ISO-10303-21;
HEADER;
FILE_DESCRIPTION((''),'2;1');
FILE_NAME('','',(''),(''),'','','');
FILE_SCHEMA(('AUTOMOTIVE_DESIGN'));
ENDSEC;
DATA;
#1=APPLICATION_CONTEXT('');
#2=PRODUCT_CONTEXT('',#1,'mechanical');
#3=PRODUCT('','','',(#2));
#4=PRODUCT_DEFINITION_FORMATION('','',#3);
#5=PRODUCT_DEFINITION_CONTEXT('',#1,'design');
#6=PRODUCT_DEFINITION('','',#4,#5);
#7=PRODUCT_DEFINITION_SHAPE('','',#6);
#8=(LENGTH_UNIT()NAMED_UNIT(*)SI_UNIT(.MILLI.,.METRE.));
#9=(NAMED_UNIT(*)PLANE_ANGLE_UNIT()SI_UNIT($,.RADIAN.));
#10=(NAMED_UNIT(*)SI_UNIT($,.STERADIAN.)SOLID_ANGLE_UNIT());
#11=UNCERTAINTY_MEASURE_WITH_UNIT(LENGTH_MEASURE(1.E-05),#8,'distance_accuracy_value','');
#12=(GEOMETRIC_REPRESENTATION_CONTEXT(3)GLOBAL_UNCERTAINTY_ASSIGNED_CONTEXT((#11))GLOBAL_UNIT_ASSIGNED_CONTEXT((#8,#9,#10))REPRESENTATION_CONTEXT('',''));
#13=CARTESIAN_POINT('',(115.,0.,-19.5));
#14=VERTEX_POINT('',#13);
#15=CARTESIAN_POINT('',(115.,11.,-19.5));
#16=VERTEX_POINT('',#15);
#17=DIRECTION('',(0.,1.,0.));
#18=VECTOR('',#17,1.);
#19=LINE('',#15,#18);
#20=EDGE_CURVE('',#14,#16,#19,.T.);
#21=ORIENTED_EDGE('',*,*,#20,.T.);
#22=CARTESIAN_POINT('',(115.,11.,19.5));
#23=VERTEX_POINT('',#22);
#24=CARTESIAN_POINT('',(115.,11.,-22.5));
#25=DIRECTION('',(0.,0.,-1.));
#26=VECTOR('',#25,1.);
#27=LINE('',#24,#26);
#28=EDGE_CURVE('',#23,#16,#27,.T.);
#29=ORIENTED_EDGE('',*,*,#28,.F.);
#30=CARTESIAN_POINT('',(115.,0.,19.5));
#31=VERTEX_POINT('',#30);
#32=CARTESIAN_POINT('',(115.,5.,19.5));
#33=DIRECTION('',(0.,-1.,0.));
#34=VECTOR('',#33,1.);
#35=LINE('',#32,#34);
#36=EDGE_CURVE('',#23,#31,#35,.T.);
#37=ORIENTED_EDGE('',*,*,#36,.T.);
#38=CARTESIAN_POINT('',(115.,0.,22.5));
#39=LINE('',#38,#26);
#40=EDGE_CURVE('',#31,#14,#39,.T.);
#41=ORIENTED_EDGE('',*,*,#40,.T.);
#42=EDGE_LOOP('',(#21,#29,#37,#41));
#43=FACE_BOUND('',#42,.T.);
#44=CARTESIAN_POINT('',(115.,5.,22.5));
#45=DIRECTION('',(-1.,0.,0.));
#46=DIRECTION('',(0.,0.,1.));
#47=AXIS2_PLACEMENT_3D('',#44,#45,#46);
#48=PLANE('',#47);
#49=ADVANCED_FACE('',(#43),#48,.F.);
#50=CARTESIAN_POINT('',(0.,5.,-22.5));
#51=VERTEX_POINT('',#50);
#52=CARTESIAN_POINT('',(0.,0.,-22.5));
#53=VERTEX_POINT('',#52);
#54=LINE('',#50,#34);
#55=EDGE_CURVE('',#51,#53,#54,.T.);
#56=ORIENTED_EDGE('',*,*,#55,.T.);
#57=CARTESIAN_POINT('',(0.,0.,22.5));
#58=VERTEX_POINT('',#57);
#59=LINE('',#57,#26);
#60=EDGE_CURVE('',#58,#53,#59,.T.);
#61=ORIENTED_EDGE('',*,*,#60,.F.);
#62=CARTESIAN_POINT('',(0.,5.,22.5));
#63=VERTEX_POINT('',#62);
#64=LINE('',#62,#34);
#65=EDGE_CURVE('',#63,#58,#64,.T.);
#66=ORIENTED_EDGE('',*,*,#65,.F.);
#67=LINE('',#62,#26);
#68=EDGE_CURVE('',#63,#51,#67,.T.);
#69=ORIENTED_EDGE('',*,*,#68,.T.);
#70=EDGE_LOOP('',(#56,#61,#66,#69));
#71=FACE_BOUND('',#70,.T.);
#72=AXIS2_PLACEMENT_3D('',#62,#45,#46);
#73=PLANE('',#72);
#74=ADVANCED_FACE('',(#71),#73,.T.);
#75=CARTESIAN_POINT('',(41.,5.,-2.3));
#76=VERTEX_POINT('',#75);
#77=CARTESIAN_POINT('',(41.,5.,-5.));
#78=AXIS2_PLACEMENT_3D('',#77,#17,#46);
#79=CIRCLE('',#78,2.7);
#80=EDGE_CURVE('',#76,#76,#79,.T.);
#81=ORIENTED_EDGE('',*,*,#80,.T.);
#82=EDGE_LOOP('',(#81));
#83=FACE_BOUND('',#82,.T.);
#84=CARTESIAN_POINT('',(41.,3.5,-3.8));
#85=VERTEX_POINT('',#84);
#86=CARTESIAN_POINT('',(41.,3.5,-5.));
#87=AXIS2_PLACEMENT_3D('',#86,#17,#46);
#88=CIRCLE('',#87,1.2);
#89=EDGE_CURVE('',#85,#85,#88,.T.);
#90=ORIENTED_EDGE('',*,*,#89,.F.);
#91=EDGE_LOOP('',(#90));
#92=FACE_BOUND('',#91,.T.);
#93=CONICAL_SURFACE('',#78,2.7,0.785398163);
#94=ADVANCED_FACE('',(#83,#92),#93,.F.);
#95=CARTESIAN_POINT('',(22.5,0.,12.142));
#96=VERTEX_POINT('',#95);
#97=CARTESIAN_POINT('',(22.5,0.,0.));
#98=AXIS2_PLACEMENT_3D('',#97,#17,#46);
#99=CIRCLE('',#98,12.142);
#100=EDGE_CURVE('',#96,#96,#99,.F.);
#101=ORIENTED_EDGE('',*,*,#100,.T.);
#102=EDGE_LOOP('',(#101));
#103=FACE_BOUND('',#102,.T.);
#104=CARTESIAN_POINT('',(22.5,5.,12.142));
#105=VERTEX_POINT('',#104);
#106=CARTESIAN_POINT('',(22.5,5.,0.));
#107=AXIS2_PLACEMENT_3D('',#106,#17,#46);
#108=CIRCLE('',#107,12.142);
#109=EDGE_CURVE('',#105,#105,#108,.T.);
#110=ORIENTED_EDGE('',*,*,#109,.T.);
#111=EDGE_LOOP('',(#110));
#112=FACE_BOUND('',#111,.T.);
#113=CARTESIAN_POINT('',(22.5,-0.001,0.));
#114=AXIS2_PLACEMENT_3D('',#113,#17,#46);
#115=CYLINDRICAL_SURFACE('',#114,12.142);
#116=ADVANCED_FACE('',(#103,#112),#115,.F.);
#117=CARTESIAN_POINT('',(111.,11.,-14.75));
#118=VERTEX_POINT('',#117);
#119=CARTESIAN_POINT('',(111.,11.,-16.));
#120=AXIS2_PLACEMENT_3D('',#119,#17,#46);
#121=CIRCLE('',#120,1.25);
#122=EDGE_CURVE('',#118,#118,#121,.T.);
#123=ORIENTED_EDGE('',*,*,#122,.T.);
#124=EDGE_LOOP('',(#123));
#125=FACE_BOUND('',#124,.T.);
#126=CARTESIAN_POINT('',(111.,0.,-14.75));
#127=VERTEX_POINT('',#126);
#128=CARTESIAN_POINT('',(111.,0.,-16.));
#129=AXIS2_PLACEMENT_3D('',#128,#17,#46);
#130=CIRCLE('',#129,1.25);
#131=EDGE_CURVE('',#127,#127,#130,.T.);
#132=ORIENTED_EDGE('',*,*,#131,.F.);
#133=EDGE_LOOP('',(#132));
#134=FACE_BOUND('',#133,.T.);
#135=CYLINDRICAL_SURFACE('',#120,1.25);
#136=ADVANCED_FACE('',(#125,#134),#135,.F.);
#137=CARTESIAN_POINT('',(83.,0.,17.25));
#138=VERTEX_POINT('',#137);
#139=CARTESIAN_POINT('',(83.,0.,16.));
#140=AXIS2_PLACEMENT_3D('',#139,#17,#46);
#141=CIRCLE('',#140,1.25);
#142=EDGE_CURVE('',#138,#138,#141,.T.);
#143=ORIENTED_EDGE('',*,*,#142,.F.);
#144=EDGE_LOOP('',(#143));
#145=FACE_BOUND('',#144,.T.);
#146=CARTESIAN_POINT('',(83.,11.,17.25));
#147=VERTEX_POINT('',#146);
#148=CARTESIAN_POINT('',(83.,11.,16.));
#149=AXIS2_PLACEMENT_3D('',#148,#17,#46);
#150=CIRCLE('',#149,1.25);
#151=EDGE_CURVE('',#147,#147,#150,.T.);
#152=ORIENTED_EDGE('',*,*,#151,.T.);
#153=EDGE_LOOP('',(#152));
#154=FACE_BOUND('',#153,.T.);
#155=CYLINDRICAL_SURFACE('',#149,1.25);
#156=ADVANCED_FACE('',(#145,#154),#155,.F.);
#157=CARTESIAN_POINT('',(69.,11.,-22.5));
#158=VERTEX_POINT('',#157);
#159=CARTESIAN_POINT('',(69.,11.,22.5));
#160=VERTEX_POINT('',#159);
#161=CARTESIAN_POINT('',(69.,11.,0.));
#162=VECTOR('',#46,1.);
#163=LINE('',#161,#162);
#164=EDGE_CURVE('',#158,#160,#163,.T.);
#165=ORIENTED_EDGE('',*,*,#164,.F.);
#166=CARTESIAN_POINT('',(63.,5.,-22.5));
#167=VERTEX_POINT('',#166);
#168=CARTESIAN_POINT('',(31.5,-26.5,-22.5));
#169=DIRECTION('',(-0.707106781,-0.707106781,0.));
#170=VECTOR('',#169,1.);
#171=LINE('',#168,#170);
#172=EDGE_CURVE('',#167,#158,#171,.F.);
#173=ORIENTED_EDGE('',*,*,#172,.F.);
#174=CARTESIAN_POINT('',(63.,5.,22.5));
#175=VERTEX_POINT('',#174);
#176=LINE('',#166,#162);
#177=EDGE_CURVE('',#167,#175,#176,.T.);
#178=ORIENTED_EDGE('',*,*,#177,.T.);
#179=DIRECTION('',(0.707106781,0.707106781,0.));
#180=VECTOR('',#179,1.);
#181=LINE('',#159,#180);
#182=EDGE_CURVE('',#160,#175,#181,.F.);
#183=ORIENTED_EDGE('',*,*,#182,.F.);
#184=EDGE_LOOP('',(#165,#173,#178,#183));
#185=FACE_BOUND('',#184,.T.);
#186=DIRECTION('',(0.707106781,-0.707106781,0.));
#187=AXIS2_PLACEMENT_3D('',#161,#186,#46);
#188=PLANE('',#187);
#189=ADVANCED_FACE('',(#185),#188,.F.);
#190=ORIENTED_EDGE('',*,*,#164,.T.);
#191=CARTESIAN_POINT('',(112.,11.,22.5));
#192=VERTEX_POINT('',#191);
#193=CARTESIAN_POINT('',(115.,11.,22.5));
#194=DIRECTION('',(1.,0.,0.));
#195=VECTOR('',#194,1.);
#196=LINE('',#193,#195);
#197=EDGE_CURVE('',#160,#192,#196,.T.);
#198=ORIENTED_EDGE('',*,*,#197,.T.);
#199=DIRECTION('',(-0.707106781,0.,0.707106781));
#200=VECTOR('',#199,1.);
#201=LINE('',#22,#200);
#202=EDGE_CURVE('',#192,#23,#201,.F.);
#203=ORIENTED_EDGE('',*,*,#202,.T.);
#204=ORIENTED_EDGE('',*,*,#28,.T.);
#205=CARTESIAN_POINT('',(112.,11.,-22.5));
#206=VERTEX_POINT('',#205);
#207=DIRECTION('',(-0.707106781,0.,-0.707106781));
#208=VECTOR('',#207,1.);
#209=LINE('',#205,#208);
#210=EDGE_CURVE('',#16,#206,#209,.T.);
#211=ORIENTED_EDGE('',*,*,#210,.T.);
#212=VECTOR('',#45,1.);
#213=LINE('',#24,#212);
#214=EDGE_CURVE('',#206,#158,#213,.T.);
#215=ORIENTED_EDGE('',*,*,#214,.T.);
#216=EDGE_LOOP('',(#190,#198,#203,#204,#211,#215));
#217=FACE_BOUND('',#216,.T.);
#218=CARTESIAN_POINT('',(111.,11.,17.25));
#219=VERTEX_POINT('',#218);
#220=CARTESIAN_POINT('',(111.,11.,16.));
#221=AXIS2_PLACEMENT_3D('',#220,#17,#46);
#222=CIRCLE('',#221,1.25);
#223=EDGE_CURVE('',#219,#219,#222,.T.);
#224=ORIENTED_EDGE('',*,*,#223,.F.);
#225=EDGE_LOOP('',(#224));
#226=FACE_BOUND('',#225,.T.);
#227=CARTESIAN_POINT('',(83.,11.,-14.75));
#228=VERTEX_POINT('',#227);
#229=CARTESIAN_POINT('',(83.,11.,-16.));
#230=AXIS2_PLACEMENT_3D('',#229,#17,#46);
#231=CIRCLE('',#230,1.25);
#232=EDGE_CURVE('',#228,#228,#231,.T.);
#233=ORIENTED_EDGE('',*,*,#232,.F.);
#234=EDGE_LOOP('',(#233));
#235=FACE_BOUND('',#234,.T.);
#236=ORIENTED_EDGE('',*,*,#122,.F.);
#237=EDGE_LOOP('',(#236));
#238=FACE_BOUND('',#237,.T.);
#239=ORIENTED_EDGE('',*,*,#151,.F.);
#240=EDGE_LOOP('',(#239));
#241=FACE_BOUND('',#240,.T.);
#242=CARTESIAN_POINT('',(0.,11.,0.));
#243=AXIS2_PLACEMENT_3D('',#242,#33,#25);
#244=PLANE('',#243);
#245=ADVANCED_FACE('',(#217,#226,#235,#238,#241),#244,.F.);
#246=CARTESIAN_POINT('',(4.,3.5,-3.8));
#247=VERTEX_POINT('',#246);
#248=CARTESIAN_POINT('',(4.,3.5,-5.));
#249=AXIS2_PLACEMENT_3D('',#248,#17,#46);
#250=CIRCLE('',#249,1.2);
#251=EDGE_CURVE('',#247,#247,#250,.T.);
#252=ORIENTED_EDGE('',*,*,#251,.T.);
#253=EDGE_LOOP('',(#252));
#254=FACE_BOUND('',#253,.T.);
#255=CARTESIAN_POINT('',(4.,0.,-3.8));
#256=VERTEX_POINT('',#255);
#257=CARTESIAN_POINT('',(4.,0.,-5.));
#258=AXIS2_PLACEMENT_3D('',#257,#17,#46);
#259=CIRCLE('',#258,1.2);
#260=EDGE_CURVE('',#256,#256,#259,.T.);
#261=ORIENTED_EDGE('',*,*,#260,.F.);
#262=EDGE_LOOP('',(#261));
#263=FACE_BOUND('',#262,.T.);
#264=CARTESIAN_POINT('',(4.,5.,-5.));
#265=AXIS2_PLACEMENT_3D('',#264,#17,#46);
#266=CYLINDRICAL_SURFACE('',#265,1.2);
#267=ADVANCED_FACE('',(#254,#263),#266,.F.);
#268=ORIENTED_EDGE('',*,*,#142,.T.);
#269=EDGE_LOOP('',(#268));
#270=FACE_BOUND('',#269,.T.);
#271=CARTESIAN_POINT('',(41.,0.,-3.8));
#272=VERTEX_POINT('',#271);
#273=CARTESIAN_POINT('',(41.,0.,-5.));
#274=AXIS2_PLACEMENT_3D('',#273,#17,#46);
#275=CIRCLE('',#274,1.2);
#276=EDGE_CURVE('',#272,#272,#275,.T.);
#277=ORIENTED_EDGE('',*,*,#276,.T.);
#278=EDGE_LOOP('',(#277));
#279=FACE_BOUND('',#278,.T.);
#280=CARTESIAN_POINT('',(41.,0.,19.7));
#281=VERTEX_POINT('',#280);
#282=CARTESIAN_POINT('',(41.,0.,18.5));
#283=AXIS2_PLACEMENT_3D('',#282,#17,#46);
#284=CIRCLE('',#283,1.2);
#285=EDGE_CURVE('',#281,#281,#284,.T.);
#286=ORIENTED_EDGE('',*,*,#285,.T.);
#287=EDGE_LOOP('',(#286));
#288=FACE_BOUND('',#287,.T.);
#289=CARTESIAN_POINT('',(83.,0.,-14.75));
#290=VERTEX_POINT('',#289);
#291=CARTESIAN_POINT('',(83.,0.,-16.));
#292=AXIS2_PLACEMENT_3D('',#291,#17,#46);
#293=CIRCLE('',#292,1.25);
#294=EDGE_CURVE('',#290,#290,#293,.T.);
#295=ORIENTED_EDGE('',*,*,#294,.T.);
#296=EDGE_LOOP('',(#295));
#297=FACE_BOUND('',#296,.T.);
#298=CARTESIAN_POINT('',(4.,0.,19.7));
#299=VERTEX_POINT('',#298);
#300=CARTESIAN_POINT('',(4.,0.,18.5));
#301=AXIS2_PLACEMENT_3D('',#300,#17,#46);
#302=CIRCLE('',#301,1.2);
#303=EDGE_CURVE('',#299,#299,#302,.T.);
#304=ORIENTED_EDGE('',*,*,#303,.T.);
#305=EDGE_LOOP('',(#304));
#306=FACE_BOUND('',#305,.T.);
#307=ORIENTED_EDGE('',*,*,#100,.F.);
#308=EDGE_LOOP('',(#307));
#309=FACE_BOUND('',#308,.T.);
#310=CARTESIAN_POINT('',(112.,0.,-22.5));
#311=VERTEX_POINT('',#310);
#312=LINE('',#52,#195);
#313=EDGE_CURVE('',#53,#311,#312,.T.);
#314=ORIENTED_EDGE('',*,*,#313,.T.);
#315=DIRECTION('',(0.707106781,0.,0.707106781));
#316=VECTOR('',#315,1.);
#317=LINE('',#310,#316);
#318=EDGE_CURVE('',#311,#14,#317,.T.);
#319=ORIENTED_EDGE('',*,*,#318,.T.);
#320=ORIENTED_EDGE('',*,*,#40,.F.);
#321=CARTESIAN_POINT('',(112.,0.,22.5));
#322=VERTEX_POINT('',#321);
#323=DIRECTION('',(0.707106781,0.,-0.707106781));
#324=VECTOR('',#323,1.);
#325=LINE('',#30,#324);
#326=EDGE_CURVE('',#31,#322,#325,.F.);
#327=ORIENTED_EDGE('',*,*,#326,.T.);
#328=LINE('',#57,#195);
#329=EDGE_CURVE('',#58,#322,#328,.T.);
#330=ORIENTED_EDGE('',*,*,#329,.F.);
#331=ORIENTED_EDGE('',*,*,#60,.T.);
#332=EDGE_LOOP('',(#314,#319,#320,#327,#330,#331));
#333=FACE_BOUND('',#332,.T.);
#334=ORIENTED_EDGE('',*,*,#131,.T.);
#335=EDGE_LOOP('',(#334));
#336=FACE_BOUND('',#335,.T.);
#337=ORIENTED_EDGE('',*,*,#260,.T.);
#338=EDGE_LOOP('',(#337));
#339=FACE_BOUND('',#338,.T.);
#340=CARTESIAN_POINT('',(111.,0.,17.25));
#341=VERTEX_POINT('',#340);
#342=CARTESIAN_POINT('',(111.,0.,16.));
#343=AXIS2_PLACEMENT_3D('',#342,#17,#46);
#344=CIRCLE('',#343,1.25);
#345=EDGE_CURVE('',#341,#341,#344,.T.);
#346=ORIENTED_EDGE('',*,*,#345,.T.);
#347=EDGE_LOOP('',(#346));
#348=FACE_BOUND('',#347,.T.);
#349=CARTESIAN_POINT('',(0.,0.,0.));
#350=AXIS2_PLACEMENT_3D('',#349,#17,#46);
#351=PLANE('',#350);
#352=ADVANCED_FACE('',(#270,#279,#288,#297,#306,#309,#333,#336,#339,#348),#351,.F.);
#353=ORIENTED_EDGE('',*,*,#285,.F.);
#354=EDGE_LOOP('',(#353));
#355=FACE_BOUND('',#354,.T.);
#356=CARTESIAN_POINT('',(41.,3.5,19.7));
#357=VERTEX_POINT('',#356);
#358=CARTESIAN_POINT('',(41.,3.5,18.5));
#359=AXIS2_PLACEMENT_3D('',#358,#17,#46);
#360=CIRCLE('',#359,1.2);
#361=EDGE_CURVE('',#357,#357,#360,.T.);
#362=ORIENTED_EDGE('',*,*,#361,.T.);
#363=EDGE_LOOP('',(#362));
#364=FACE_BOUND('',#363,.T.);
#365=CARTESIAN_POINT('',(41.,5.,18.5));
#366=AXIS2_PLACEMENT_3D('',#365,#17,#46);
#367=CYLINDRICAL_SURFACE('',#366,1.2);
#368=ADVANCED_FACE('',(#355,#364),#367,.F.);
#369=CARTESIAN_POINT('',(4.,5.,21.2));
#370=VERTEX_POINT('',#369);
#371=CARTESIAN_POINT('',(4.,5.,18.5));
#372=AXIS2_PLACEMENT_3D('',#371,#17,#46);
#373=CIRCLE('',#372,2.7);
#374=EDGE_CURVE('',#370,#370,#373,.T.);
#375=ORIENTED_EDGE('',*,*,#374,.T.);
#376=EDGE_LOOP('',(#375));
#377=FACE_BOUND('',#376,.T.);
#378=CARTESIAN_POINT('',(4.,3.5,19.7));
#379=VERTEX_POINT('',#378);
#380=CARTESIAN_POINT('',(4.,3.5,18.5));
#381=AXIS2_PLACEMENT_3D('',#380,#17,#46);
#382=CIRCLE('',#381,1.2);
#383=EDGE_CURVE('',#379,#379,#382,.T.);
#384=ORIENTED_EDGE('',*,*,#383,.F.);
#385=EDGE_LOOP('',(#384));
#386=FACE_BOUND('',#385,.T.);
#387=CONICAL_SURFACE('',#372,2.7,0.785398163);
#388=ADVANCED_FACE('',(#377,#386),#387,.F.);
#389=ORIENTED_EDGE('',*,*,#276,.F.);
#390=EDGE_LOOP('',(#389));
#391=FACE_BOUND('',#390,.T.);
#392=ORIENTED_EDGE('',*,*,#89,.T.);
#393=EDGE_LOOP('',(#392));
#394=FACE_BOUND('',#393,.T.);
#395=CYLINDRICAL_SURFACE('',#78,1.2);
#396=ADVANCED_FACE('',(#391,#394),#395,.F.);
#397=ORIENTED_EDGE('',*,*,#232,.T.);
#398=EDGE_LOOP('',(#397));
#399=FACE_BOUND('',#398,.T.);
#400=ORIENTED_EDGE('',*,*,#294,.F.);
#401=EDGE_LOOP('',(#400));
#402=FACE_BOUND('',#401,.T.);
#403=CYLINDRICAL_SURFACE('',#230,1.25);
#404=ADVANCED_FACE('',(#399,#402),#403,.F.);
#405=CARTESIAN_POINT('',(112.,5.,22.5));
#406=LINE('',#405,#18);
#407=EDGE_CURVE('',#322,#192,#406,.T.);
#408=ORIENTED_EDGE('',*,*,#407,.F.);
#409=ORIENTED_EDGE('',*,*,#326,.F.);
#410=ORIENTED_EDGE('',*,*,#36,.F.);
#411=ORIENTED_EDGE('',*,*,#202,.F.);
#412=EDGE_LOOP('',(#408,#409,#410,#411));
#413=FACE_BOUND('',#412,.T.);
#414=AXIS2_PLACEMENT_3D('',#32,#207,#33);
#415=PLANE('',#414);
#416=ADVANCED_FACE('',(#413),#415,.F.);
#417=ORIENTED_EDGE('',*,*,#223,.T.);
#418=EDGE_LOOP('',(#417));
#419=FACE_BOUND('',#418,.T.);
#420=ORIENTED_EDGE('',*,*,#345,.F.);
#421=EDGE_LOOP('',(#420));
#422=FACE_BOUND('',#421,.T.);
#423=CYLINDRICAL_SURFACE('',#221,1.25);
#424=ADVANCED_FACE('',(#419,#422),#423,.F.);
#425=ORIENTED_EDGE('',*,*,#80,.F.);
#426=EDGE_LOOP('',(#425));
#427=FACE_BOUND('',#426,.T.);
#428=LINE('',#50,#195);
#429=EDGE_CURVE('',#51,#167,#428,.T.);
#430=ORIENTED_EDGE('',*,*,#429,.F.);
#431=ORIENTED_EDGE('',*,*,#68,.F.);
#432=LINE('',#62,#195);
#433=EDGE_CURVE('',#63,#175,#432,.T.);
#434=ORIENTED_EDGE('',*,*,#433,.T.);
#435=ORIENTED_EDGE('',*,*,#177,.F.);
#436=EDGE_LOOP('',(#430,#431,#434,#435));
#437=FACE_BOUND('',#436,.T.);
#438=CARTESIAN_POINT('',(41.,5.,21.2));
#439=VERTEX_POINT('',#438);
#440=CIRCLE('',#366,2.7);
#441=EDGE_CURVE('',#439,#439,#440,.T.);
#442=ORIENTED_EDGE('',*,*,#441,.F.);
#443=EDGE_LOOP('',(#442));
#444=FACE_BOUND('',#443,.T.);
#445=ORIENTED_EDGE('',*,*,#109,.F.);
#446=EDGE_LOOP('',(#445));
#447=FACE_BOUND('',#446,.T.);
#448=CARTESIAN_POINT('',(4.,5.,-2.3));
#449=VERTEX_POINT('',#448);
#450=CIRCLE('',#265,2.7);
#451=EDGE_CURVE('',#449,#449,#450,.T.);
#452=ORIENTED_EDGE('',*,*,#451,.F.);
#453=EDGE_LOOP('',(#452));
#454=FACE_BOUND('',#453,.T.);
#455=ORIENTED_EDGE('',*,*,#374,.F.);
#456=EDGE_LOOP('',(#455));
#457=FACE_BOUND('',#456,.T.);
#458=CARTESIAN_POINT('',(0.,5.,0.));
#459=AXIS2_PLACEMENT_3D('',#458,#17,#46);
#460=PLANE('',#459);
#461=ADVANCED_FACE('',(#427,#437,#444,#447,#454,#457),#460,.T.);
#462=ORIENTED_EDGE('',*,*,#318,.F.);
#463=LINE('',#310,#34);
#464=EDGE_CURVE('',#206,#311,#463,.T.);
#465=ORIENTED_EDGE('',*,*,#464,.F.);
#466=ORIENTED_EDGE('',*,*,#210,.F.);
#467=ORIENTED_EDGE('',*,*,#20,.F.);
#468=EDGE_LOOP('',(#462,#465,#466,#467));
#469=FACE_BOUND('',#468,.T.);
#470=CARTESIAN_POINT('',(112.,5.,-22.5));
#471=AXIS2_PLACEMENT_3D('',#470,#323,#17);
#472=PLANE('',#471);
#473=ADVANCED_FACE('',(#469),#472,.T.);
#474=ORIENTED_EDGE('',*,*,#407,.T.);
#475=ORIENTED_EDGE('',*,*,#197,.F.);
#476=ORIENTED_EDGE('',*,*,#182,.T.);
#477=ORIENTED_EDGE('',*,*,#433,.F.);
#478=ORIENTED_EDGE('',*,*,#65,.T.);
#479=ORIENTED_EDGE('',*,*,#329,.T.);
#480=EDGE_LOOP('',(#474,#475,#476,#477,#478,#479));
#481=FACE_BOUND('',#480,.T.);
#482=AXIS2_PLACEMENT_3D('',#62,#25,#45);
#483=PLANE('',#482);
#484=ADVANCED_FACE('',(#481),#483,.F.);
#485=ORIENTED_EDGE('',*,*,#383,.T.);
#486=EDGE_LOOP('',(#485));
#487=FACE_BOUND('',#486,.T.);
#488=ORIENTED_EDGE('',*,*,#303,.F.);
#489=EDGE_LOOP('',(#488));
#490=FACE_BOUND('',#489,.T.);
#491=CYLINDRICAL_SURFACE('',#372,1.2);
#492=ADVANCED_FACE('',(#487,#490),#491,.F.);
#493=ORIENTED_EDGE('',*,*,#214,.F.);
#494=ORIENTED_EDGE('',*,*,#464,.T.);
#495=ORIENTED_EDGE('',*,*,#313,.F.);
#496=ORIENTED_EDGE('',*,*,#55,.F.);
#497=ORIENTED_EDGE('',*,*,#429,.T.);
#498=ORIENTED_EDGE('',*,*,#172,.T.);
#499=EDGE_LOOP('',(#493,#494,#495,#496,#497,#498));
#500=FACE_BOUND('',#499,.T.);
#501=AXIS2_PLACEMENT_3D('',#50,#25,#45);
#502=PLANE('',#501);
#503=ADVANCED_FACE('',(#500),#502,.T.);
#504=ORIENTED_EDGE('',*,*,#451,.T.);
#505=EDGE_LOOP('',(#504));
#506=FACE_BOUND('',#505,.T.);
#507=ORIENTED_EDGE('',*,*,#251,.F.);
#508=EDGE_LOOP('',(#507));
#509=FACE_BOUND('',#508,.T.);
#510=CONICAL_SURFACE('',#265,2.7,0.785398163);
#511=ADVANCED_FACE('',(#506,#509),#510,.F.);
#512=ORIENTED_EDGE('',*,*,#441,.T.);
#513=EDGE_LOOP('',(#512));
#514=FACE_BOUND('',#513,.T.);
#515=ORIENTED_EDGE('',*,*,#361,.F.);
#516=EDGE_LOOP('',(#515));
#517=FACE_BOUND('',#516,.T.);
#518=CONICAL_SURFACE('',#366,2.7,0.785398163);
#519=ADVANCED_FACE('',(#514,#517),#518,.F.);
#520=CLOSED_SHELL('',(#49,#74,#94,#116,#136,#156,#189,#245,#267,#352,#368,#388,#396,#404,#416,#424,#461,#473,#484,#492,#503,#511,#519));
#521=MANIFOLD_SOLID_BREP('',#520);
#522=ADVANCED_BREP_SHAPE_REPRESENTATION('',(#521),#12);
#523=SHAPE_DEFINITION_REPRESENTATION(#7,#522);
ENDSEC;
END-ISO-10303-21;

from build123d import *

# Parameters (mm, degrees)
SKETCH1_W                                           = 115
SKETCH1_H                                           = 45
BOSS_EXTRUDE1_DEPTH                                 = 5
CUT_EXTRUDE1_REACH                                  = 119.287
SKETCH2_R                                           = 12.142
CSK_FOR_M2_COUNTERSUNK_FLAT_HEAD_SCREW1_D           = 2.4
CSK_FOR_M2_COUNTERSUNK_FLAT_HEAD_SCREW1_CSINK_D     = 5.4
CSK_FOR_M2_COUNTERSUNK_FLAT_HEAD_SCREW1_CSINK_ANGLE = 90
SKETCH13_W                                          = 52
SKETCH13_H                                          = 45
BOSS_EXTRUDE4_DEPTH                                 = 6
CHAMFER2_SIZE                                       = 6
M3_TAPPED_HOLE1_D                                   = 2.5
CHAMFER1_SIZE                                       = 3


with BuildPart() as part:
    # Sketch1 → Boss-Extrude1 (new body)
    with BuildSketch(Plane(origin=(0, 0, 0), x_dir=(1, 0, 0), z_dir=(0, 1, 0))):
        with Locations((57.5, 0)):
            Rectangle(SKETCH1_W, SKETCH1_H)
    extrude(amount=BOSS_EXTRUDE1_DEPTH)

    # Sketch2 → Cut-Extrude1 (cut, up to next)
    with BuildSketch(Plane(origin=(0, 5, 0), x_dir=(1, 0, 0), z_dir=(0, 1, 0)), mode=Mode.PRIVATE) as cut_extrude1_sk1:
        with Locations(Location((22.5, 0, 0), (0, 0, 270))):
            Circle(SKETCH2_R)
    cut_extrude1_tool1 = extrude(cut_extrude1_sk1.sketch, amount=-CUT_EXTRUDE1_REACH, mode=Mode.PRIVATE) & part.part
    add(cut_extrude1_tool1.solids().sort_by_distance((22.5, 5, 0))[0], mode=Mode.SUBTRACT)

    # CSK for M2 Countersunk Flat Head Screw1 (through all)
    with Locations(Plane(origin=(0, 5, 0), x_dir=(1, 0, 0), z_dir=(0, 1, 0))):
        with Locations((4, -18.5), (41, -18.5), (41, 5), (4, 5)):
            CounterSinkHole(CSK_FOR_M2_COUNTERSUNK_FLAT_HEAD_SCREW1_D / 2, CSK_FOR_M2_COUNTERSUNK_FLAT_HEAD_SCREW1_CSINK_D / 2, counter_sink_angle=CSK_FOR_M2_COUNTERSUNK_FLAT_HEAD_SCREW1_CSINK_ANGLE)

    # Sketch13 → Boss-Extrude4 (add)
    with BuildSketch(Plane(origin=(0, 5, 0), x_dir=(1, 0, 0), z_dir=(0, 1, 0))):
        with Locations((89, 0)):
            Rectangle(SKETCH13_W, SKETCH13_H)
    extrude(amount=BOSS_EXTRUDE4_DEPTH)

    # Chamfer2
    chamfer2_edges = [part.edges().sort_by_distance(p)[0] for p in [
        (63, 11, 0),
    ]]
    chamfer(chamfer2_edges, length=CHAMFER2_SIZE - 0.0001)  # a hair under: the kernel refuses the full size

    # M3 Tapped Hole1 (through all)
    with Locations(Plane(origin=(0, 11, 0), x_dir=(1, 0, 0), z_dir=(0, 1, 0))):
        with Locations((83, 16), (111, 16), (83, -16), (111, -16)):
            Hole(M3_TAPPED_HOLE1_D / 2)

    # Chamfer1
    chamfer1_edges = [part.edges().sort_by_distance(p)[0] for p in [
        (115, 5.5, -22.5),
        (115, 5.5, 22.5),
    ]]
    chamfer(chamfer1_edges, length=CHAMFER1_SIZE)


solid = part.part
